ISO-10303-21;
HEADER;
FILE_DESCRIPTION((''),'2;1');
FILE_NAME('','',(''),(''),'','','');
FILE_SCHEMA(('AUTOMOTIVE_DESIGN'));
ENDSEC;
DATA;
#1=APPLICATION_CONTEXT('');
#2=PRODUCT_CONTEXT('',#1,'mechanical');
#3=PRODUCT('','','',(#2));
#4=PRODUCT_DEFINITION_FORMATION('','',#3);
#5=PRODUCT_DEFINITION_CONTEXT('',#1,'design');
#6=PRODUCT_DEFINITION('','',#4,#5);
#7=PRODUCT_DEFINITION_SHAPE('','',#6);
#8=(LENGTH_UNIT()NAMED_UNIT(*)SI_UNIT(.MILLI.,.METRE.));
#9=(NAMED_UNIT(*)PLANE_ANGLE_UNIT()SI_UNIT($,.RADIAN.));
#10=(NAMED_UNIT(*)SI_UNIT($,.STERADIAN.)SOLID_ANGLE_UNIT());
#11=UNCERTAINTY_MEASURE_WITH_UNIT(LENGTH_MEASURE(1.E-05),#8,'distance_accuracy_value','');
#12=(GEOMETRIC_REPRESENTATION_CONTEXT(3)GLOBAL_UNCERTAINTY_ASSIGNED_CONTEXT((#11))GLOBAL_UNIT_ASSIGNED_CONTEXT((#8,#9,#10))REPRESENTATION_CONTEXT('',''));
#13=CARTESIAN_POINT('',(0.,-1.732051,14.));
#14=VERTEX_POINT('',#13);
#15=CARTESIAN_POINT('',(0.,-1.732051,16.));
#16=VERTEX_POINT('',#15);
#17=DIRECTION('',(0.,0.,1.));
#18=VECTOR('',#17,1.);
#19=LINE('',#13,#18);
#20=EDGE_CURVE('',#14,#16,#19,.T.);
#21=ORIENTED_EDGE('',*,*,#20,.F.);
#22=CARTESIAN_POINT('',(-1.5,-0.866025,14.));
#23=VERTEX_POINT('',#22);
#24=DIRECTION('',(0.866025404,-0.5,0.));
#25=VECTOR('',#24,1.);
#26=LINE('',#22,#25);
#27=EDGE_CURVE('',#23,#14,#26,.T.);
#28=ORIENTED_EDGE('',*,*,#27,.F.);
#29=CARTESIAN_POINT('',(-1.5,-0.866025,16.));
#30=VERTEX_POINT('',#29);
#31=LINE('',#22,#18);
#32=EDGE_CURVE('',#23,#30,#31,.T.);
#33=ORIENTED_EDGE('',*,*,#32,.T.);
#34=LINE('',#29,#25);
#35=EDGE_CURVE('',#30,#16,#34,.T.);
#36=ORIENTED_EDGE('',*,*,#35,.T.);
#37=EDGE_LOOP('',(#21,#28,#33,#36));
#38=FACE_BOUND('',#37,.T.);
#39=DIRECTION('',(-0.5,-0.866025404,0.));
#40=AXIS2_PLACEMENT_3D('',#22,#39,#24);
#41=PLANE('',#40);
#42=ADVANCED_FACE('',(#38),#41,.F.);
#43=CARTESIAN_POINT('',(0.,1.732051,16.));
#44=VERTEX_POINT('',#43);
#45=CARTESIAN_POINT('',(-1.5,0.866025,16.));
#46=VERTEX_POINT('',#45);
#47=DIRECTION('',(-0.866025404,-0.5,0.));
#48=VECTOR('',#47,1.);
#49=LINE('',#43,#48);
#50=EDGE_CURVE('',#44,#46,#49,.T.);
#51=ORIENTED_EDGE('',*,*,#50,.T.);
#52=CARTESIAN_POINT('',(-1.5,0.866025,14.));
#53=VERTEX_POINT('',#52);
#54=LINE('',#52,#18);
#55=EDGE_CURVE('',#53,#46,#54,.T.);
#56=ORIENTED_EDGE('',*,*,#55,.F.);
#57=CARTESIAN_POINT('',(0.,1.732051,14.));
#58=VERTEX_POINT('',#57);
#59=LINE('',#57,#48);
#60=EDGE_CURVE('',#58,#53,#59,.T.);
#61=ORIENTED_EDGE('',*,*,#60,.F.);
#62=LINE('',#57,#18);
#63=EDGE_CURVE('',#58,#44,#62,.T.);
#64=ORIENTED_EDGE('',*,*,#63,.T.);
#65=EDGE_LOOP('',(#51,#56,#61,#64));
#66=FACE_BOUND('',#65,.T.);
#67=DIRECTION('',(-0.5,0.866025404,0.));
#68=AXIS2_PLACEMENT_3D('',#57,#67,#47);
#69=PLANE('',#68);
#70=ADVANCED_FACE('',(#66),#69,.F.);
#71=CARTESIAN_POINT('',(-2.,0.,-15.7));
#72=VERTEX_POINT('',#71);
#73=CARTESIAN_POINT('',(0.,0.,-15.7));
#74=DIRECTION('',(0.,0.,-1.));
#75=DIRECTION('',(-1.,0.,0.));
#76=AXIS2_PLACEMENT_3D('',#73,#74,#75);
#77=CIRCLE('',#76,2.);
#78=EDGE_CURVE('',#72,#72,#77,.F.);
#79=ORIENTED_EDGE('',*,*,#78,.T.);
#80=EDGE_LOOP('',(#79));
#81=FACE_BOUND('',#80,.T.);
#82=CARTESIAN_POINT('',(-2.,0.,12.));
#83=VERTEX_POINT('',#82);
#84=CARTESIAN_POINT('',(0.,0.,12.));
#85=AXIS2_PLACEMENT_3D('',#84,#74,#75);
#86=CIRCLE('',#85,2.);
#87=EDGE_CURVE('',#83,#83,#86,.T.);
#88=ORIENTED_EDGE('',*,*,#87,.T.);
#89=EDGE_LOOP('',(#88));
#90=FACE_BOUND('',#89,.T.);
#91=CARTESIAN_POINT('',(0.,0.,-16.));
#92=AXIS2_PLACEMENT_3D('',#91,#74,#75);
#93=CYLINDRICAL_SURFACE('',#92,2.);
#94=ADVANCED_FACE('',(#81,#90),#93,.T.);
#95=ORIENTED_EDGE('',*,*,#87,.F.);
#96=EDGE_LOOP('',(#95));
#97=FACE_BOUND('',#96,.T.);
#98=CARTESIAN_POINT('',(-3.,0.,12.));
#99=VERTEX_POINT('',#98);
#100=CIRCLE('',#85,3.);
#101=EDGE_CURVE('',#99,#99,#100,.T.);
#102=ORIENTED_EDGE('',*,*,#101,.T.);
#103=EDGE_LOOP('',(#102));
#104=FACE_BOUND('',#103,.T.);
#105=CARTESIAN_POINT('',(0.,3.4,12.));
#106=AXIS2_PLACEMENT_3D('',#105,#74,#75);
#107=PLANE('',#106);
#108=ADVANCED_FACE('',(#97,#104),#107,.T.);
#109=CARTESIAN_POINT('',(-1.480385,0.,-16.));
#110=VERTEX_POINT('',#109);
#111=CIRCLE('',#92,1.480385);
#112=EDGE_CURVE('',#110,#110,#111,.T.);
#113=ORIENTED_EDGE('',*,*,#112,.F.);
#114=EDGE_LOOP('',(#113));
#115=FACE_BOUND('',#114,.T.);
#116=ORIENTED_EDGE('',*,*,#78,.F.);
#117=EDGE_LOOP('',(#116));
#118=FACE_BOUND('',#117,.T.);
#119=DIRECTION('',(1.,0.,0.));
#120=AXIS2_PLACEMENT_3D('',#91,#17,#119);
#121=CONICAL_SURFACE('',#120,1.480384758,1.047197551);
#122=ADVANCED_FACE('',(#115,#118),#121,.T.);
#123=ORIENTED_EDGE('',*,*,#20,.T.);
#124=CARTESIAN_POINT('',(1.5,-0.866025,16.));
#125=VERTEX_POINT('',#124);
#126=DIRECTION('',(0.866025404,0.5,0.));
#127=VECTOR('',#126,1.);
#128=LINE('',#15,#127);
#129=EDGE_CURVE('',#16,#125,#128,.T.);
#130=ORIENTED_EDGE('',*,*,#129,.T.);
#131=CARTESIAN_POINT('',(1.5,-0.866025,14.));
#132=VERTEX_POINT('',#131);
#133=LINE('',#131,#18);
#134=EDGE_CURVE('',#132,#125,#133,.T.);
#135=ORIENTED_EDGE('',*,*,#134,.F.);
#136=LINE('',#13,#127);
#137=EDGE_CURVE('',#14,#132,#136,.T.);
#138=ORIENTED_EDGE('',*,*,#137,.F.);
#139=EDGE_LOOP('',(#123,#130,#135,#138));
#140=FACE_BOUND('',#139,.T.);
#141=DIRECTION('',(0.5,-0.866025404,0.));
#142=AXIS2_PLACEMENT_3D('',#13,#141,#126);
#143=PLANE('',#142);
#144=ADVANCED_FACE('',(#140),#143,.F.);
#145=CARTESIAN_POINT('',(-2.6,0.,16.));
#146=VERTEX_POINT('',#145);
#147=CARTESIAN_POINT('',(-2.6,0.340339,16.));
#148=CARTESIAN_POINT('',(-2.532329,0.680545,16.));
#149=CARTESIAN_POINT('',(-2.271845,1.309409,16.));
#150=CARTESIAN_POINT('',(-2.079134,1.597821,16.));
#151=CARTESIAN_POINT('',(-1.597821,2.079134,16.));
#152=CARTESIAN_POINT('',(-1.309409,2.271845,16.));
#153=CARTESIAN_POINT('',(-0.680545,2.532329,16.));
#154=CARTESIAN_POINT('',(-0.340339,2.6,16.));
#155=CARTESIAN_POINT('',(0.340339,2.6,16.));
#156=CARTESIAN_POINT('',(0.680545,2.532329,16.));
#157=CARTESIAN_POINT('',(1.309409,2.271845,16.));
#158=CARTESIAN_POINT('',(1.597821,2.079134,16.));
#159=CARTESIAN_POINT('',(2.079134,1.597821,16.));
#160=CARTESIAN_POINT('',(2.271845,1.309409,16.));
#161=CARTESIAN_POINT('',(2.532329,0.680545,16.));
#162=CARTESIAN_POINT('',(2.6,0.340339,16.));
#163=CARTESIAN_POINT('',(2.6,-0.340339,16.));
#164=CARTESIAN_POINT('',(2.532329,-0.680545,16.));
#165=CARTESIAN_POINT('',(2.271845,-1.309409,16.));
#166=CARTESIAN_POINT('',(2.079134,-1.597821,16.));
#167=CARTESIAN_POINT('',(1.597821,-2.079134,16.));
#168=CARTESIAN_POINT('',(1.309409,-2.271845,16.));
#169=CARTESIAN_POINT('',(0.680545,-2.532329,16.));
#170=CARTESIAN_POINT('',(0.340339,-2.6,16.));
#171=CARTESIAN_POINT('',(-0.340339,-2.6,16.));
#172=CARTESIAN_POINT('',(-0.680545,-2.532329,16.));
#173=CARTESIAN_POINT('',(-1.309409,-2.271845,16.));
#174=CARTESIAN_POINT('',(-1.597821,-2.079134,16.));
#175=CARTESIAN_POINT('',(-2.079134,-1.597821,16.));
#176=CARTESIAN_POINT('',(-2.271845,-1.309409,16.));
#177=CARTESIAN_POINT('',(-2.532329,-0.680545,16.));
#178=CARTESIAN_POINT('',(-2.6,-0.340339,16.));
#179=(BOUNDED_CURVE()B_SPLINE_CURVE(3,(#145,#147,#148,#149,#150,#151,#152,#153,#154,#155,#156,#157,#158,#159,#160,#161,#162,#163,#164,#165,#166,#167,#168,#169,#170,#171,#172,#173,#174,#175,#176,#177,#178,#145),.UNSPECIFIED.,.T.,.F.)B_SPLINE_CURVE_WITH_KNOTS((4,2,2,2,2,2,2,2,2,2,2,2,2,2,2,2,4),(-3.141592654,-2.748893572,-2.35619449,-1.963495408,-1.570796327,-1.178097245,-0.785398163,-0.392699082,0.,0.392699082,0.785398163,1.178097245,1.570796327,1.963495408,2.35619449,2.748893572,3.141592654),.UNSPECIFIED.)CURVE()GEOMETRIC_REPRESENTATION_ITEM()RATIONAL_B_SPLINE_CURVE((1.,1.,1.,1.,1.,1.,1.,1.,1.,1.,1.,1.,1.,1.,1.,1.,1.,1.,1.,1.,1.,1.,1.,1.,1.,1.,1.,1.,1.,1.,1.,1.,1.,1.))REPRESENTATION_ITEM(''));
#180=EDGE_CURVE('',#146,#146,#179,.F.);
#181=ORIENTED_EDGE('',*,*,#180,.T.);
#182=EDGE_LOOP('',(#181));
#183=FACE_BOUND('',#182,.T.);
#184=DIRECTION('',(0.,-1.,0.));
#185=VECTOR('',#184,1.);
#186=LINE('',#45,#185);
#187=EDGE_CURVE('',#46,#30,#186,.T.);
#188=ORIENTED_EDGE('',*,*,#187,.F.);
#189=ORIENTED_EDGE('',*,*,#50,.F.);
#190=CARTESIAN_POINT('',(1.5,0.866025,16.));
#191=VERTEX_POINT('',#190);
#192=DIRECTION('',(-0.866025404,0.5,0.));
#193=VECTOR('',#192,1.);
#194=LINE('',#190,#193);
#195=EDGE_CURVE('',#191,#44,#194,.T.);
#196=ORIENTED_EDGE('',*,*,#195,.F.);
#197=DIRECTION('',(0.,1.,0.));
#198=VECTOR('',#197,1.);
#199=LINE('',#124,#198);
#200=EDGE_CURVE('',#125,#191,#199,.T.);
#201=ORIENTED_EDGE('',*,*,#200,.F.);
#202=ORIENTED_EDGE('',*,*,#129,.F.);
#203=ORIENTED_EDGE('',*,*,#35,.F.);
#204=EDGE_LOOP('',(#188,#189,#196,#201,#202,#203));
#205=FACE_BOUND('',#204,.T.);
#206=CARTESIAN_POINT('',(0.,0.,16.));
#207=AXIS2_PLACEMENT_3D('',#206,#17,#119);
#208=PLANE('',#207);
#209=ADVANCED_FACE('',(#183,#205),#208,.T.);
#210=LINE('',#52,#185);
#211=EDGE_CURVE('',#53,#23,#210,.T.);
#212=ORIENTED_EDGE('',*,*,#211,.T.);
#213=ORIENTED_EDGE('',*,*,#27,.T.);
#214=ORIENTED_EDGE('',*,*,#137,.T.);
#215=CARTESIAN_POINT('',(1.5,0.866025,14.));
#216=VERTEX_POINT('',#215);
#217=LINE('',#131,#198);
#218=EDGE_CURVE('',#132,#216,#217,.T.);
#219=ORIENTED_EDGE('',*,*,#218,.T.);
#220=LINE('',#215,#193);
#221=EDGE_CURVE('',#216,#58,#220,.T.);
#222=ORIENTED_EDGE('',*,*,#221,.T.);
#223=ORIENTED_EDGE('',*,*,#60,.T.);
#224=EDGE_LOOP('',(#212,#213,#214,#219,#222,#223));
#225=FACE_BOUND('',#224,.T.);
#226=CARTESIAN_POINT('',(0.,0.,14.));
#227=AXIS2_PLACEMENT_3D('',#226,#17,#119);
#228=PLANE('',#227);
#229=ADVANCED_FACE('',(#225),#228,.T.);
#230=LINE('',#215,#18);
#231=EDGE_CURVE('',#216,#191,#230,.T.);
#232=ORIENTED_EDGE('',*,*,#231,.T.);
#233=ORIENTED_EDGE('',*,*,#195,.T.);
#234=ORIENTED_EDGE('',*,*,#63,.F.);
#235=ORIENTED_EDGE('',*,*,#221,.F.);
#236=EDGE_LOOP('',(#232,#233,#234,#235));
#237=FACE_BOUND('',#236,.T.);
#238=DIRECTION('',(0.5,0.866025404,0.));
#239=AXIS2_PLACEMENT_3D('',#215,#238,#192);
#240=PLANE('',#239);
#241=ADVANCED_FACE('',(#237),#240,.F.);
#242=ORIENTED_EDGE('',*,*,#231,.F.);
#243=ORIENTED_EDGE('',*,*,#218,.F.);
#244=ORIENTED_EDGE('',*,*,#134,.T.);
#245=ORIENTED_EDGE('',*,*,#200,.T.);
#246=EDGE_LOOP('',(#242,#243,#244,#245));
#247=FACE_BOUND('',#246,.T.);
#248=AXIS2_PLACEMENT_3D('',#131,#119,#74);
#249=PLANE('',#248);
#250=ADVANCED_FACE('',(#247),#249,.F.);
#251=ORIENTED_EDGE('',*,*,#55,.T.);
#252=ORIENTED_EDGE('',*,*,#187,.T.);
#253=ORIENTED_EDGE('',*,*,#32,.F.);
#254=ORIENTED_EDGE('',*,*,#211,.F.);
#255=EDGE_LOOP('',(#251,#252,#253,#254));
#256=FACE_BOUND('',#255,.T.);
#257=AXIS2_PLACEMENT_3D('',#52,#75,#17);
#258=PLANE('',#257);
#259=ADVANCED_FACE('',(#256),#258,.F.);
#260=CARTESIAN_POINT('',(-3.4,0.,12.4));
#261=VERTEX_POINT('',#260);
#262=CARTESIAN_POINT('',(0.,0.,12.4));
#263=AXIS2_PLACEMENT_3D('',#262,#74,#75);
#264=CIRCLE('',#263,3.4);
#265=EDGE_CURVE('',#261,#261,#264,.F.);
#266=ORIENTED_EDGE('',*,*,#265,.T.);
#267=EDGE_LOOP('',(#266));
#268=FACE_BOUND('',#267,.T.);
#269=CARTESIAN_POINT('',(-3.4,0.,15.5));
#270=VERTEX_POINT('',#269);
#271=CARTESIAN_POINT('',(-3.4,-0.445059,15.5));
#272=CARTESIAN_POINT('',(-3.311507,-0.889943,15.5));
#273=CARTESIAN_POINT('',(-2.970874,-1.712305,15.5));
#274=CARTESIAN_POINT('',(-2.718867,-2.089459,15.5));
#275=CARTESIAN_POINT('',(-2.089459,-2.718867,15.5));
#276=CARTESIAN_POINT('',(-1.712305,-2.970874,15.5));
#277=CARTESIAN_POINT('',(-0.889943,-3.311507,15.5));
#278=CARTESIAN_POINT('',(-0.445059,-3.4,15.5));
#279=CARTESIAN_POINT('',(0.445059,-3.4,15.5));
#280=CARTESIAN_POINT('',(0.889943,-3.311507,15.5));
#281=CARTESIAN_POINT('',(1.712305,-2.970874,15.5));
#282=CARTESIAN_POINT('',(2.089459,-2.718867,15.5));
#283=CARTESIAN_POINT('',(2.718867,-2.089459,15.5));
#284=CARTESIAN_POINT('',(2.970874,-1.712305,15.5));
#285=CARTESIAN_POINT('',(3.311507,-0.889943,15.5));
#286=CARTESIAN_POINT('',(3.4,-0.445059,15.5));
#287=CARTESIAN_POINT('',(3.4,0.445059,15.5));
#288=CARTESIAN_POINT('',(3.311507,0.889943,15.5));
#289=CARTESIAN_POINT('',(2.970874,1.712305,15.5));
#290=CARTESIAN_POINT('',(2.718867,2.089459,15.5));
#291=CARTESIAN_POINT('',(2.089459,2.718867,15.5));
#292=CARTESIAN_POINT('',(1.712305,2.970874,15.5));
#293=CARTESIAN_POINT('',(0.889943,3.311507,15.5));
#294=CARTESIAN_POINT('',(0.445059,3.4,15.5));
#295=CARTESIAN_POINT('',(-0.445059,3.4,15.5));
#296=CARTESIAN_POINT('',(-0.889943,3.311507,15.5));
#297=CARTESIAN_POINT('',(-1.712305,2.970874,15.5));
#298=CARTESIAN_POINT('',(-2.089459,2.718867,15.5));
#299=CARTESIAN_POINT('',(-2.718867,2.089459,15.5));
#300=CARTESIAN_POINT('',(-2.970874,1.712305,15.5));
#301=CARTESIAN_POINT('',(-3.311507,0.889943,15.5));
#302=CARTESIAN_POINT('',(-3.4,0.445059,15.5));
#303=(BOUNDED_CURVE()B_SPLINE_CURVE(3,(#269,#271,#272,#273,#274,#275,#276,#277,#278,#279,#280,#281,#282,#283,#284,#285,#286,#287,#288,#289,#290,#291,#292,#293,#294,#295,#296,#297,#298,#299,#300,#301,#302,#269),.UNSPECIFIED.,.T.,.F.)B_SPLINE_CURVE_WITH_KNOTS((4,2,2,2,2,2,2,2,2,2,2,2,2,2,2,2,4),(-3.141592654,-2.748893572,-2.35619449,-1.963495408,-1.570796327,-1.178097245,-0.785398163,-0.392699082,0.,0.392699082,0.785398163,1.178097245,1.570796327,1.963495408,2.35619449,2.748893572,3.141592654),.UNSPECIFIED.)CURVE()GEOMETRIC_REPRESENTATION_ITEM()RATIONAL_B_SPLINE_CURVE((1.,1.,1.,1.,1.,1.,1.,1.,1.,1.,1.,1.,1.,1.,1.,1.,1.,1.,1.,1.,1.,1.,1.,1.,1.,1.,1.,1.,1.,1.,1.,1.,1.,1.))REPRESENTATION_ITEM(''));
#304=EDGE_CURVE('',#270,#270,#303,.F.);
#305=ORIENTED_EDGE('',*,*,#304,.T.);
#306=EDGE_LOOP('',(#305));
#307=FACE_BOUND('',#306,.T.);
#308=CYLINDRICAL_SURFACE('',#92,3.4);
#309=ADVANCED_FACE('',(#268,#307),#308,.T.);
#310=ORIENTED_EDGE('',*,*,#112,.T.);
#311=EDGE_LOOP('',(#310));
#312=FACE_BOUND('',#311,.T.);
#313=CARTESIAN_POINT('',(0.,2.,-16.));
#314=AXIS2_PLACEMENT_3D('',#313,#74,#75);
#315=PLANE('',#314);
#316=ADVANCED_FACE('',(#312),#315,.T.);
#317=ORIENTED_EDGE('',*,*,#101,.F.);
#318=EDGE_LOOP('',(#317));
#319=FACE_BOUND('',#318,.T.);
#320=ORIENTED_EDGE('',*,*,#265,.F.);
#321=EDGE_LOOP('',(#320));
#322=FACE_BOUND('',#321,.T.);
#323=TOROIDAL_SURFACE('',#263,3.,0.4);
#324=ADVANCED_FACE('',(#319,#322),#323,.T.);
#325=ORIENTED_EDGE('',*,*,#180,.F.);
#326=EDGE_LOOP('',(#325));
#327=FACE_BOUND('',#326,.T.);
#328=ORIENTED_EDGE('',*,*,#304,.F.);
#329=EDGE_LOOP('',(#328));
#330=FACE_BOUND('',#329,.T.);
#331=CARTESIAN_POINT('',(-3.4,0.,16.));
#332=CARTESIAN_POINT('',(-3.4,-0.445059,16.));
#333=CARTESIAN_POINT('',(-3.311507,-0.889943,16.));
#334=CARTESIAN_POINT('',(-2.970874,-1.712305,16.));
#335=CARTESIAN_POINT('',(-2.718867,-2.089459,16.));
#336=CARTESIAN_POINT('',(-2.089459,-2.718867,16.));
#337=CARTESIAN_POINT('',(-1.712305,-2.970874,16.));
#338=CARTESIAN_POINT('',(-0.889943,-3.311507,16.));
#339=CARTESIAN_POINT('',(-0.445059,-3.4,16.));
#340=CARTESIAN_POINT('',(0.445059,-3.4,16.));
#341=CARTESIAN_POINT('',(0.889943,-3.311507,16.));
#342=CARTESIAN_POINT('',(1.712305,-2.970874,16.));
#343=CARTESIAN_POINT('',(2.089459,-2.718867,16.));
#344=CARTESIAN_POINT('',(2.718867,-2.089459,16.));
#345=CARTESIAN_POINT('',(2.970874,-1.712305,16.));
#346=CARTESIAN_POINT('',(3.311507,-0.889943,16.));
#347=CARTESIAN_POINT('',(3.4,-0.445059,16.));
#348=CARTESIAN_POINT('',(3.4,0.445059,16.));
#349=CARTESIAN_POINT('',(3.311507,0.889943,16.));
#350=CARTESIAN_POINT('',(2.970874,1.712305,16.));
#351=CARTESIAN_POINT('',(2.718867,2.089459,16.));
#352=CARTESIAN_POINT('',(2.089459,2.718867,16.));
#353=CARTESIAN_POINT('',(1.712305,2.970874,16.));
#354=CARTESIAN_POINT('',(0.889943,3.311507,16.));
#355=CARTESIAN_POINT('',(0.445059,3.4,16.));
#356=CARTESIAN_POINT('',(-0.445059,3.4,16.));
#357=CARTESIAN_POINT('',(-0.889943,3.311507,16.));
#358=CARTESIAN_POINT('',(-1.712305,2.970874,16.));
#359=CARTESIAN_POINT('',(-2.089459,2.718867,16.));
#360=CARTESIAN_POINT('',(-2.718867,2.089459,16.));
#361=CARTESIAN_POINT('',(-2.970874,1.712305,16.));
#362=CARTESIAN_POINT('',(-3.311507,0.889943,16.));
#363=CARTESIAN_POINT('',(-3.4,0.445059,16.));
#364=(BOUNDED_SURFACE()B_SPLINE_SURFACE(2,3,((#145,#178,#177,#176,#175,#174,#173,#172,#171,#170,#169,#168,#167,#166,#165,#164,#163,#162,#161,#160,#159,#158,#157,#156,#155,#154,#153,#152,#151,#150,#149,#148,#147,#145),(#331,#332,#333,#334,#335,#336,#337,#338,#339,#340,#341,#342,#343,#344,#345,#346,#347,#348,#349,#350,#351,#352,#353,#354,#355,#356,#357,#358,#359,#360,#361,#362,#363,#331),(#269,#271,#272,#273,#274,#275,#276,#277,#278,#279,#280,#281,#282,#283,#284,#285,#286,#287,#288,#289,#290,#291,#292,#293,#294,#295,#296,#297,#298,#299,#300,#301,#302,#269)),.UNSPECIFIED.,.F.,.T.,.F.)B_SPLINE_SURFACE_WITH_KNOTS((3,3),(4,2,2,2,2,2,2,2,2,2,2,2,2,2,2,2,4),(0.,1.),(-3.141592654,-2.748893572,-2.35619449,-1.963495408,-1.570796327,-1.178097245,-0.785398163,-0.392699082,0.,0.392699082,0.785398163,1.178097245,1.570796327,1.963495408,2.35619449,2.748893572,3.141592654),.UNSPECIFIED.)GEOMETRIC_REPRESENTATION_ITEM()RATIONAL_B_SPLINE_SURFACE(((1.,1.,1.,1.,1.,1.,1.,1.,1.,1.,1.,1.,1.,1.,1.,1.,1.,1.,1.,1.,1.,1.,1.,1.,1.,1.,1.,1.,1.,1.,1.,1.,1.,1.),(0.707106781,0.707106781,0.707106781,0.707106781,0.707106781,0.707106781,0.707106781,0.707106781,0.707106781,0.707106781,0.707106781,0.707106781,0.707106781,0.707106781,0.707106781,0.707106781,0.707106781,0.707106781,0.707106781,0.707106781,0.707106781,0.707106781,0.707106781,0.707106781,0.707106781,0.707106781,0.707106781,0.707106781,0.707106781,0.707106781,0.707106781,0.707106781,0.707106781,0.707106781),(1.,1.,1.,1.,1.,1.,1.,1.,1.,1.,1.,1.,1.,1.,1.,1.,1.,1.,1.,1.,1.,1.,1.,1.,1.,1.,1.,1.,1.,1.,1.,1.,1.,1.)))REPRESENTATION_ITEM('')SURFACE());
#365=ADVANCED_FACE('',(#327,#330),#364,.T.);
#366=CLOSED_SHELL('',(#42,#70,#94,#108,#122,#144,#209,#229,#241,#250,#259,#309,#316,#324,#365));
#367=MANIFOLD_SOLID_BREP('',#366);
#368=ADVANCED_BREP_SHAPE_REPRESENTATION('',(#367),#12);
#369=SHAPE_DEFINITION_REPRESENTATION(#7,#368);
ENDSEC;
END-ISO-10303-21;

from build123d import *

# Parameters (mm, degrees)
CHAMFER_1_SIZE      = 0.3
CHAMFER_1_SIZE2     = 0.519615242
FILLET_1_R          = 0.4
FILLET_2_SIZE       = 0.5
FILLET_2_SIZE_2     = 0.8
CUT_EXTRUDE_1_DEPTH = 2


with BuildPart() as part:
    # 草图2 → 旋转1 (revolve)
    with BuildSketch(Plane(origin=(0, 0, 0), x_dir=(0, 0, -1), z_dir=(1, 0, 0)), mode=Mode.PRIVATE) as revolve_1_sk:
        Polygon((-16, 0), (-16, 3.4), (-12, 3.4), (-12, 2), (16, 2), (16, 0), align=None)
    revolve(revolve_1_sk.sketch.rotate(Axis((0, 0, -16), (0, 0, 1)), 90), axis=Axis((0, 0, -16), (0, 0, 1)))

    # 倒角1
    chamfer_1_edges = [part.edges().sort_by_distance(p)[0] for p in [
        (2, 0, -16),
    ]]
    chamfer_1_side = [part.faces().sort_by_distance(p)[0] for p in [
        (2, 0, -2),
    ]]
    chamfer(chamfer_1_edges, length=CHAMFER_1_SIZE, length2=CHAMFER_1_SIZE2, reference=chamfer_1_side[0])

    # 圆角1
    fillet_1_edges = [part.edges().sort_by_distance(p)[0] for p in [
        (3.4, 0, 12),
    ]]
    fillet(fillet_1_edges, radius=FILLET_1_R)

    # 圆角2
    # an asymmetric fillet: 0.8, 0.5 mm, written as the material it takes off along each edge
    with BuildSketch(Plane(origin=(0, 0, 16), x_dir=(-1, 0, 0), z_dir=(0, 1, 0))) as fillet_2_piece_1:
        with BuildLine():
            Bezier((3.4, -FILLET_2_SIZE), (3.4, 0), (3.4 - FILLET_2_SIZE_2, 0), weights=[1, 0.707106781, 1])
            Line((3.4 - FILLET_2_SIZE_2, 0), (3.4, 0))
            Line((3.4, 0), (3.4, -FILLET_2_SIZE))
        make_face()
    revolve(axis=Axis((0, 0, 16), (0, 0, 1)), mode=Mode.SUBTRACT)

    # 草图3 → 切除-拉伸1 (cut)
    with BuildSketch(Plane.XY.offset(16)):
        Polygon((0, 1.732050808), (-1.5, 0.866025404), (-1.5, -0.866025404), (0, -1.732050808), (1.5, -0.866025404), (1.5, 0.866025404), align=None)
    extrude(amount=-CUT_EXTRUDE_1_DEPTH, mode=Mode.SUBTRACT)


solid = part.part
